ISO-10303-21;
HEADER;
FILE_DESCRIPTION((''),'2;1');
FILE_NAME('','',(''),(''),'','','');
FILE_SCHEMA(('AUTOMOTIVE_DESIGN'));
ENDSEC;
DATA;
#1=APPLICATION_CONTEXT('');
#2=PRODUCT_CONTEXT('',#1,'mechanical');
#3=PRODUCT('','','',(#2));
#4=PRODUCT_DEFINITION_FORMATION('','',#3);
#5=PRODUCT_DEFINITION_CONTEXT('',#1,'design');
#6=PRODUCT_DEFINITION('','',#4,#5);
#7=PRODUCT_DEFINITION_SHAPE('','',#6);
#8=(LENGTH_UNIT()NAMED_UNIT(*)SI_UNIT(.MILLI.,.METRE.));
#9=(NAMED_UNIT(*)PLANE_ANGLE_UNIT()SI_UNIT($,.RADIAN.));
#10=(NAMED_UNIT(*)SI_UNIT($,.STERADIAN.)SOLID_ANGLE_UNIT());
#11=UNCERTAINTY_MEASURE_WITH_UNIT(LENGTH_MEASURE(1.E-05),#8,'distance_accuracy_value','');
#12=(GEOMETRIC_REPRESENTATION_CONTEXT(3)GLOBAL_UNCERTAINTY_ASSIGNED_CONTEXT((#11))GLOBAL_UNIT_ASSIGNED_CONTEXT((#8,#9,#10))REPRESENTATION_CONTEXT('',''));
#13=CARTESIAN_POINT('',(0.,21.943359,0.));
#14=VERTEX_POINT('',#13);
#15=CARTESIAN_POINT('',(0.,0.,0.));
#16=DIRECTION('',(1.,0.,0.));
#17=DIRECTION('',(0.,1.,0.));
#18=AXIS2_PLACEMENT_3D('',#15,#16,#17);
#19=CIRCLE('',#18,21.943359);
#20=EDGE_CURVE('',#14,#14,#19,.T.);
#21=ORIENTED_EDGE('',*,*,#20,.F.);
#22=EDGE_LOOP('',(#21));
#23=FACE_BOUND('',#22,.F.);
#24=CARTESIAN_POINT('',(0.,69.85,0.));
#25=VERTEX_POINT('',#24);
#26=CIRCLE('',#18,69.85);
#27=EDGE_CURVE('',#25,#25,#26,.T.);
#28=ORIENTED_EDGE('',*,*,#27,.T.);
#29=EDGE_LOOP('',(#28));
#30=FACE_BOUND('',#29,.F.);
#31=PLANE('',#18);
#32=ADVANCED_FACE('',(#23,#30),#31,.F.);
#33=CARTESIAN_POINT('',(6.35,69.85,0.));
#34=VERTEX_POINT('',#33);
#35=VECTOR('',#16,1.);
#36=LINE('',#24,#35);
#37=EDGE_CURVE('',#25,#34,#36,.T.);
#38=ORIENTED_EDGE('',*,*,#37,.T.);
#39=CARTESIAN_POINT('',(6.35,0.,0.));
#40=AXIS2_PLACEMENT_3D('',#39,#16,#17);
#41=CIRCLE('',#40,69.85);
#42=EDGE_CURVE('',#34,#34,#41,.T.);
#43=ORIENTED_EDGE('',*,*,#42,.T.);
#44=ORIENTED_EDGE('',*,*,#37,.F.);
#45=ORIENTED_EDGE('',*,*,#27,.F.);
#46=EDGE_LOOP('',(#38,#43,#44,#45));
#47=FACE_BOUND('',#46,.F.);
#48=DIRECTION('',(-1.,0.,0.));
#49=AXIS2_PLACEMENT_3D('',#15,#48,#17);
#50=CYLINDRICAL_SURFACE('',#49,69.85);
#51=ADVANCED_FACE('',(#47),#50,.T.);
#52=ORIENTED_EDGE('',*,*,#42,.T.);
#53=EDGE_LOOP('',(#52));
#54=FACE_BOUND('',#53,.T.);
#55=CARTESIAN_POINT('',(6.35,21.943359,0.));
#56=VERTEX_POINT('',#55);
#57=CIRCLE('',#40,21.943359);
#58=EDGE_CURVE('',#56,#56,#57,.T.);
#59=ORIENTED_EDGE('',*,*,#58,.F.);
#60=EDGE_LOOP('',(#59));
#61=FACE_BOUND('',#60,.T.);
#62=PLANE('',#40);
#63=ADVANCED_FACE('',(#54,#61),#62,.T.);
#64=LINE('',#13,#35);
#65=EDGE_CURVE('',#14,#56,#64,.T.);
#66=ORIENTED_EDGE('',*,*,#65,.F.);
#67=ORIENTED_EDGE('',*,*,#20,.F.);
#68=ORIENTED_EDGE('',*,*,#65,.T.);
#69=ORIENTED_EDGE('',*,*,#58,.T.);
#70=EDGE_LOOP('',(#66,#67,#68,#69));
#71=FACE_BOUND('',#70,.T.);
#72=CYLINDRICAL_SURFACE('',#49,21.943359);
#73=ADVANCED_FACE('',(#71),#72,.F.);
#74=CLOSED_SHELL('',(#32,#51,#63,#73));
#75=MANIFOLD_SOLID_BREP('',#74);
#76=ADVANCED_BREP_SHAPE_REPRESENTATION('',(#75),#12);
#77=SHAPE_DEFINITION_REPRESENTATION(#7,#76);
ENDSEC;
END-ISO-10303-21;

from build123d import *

# Parameters (mm, degrees)
F1_R     = 69.85
F1_R_2   = 21.9433592394
F2_DEPTH = 6.35


# Not quite as in the source:
# - a variable given as a bare number and used for a length is read in inches; the dataset says mm whatever the document's units were


with BuildPart() as f2:
    # F1 (on Right) → F2 (new body)
    with BuildSketch(Plane.YZ):
        Circle(F1_R)
        Circle(F1_R_2, mode=Mode.SUBTRACT)
    extrude(amount=F2_DEPTH)


solid = f2.part
